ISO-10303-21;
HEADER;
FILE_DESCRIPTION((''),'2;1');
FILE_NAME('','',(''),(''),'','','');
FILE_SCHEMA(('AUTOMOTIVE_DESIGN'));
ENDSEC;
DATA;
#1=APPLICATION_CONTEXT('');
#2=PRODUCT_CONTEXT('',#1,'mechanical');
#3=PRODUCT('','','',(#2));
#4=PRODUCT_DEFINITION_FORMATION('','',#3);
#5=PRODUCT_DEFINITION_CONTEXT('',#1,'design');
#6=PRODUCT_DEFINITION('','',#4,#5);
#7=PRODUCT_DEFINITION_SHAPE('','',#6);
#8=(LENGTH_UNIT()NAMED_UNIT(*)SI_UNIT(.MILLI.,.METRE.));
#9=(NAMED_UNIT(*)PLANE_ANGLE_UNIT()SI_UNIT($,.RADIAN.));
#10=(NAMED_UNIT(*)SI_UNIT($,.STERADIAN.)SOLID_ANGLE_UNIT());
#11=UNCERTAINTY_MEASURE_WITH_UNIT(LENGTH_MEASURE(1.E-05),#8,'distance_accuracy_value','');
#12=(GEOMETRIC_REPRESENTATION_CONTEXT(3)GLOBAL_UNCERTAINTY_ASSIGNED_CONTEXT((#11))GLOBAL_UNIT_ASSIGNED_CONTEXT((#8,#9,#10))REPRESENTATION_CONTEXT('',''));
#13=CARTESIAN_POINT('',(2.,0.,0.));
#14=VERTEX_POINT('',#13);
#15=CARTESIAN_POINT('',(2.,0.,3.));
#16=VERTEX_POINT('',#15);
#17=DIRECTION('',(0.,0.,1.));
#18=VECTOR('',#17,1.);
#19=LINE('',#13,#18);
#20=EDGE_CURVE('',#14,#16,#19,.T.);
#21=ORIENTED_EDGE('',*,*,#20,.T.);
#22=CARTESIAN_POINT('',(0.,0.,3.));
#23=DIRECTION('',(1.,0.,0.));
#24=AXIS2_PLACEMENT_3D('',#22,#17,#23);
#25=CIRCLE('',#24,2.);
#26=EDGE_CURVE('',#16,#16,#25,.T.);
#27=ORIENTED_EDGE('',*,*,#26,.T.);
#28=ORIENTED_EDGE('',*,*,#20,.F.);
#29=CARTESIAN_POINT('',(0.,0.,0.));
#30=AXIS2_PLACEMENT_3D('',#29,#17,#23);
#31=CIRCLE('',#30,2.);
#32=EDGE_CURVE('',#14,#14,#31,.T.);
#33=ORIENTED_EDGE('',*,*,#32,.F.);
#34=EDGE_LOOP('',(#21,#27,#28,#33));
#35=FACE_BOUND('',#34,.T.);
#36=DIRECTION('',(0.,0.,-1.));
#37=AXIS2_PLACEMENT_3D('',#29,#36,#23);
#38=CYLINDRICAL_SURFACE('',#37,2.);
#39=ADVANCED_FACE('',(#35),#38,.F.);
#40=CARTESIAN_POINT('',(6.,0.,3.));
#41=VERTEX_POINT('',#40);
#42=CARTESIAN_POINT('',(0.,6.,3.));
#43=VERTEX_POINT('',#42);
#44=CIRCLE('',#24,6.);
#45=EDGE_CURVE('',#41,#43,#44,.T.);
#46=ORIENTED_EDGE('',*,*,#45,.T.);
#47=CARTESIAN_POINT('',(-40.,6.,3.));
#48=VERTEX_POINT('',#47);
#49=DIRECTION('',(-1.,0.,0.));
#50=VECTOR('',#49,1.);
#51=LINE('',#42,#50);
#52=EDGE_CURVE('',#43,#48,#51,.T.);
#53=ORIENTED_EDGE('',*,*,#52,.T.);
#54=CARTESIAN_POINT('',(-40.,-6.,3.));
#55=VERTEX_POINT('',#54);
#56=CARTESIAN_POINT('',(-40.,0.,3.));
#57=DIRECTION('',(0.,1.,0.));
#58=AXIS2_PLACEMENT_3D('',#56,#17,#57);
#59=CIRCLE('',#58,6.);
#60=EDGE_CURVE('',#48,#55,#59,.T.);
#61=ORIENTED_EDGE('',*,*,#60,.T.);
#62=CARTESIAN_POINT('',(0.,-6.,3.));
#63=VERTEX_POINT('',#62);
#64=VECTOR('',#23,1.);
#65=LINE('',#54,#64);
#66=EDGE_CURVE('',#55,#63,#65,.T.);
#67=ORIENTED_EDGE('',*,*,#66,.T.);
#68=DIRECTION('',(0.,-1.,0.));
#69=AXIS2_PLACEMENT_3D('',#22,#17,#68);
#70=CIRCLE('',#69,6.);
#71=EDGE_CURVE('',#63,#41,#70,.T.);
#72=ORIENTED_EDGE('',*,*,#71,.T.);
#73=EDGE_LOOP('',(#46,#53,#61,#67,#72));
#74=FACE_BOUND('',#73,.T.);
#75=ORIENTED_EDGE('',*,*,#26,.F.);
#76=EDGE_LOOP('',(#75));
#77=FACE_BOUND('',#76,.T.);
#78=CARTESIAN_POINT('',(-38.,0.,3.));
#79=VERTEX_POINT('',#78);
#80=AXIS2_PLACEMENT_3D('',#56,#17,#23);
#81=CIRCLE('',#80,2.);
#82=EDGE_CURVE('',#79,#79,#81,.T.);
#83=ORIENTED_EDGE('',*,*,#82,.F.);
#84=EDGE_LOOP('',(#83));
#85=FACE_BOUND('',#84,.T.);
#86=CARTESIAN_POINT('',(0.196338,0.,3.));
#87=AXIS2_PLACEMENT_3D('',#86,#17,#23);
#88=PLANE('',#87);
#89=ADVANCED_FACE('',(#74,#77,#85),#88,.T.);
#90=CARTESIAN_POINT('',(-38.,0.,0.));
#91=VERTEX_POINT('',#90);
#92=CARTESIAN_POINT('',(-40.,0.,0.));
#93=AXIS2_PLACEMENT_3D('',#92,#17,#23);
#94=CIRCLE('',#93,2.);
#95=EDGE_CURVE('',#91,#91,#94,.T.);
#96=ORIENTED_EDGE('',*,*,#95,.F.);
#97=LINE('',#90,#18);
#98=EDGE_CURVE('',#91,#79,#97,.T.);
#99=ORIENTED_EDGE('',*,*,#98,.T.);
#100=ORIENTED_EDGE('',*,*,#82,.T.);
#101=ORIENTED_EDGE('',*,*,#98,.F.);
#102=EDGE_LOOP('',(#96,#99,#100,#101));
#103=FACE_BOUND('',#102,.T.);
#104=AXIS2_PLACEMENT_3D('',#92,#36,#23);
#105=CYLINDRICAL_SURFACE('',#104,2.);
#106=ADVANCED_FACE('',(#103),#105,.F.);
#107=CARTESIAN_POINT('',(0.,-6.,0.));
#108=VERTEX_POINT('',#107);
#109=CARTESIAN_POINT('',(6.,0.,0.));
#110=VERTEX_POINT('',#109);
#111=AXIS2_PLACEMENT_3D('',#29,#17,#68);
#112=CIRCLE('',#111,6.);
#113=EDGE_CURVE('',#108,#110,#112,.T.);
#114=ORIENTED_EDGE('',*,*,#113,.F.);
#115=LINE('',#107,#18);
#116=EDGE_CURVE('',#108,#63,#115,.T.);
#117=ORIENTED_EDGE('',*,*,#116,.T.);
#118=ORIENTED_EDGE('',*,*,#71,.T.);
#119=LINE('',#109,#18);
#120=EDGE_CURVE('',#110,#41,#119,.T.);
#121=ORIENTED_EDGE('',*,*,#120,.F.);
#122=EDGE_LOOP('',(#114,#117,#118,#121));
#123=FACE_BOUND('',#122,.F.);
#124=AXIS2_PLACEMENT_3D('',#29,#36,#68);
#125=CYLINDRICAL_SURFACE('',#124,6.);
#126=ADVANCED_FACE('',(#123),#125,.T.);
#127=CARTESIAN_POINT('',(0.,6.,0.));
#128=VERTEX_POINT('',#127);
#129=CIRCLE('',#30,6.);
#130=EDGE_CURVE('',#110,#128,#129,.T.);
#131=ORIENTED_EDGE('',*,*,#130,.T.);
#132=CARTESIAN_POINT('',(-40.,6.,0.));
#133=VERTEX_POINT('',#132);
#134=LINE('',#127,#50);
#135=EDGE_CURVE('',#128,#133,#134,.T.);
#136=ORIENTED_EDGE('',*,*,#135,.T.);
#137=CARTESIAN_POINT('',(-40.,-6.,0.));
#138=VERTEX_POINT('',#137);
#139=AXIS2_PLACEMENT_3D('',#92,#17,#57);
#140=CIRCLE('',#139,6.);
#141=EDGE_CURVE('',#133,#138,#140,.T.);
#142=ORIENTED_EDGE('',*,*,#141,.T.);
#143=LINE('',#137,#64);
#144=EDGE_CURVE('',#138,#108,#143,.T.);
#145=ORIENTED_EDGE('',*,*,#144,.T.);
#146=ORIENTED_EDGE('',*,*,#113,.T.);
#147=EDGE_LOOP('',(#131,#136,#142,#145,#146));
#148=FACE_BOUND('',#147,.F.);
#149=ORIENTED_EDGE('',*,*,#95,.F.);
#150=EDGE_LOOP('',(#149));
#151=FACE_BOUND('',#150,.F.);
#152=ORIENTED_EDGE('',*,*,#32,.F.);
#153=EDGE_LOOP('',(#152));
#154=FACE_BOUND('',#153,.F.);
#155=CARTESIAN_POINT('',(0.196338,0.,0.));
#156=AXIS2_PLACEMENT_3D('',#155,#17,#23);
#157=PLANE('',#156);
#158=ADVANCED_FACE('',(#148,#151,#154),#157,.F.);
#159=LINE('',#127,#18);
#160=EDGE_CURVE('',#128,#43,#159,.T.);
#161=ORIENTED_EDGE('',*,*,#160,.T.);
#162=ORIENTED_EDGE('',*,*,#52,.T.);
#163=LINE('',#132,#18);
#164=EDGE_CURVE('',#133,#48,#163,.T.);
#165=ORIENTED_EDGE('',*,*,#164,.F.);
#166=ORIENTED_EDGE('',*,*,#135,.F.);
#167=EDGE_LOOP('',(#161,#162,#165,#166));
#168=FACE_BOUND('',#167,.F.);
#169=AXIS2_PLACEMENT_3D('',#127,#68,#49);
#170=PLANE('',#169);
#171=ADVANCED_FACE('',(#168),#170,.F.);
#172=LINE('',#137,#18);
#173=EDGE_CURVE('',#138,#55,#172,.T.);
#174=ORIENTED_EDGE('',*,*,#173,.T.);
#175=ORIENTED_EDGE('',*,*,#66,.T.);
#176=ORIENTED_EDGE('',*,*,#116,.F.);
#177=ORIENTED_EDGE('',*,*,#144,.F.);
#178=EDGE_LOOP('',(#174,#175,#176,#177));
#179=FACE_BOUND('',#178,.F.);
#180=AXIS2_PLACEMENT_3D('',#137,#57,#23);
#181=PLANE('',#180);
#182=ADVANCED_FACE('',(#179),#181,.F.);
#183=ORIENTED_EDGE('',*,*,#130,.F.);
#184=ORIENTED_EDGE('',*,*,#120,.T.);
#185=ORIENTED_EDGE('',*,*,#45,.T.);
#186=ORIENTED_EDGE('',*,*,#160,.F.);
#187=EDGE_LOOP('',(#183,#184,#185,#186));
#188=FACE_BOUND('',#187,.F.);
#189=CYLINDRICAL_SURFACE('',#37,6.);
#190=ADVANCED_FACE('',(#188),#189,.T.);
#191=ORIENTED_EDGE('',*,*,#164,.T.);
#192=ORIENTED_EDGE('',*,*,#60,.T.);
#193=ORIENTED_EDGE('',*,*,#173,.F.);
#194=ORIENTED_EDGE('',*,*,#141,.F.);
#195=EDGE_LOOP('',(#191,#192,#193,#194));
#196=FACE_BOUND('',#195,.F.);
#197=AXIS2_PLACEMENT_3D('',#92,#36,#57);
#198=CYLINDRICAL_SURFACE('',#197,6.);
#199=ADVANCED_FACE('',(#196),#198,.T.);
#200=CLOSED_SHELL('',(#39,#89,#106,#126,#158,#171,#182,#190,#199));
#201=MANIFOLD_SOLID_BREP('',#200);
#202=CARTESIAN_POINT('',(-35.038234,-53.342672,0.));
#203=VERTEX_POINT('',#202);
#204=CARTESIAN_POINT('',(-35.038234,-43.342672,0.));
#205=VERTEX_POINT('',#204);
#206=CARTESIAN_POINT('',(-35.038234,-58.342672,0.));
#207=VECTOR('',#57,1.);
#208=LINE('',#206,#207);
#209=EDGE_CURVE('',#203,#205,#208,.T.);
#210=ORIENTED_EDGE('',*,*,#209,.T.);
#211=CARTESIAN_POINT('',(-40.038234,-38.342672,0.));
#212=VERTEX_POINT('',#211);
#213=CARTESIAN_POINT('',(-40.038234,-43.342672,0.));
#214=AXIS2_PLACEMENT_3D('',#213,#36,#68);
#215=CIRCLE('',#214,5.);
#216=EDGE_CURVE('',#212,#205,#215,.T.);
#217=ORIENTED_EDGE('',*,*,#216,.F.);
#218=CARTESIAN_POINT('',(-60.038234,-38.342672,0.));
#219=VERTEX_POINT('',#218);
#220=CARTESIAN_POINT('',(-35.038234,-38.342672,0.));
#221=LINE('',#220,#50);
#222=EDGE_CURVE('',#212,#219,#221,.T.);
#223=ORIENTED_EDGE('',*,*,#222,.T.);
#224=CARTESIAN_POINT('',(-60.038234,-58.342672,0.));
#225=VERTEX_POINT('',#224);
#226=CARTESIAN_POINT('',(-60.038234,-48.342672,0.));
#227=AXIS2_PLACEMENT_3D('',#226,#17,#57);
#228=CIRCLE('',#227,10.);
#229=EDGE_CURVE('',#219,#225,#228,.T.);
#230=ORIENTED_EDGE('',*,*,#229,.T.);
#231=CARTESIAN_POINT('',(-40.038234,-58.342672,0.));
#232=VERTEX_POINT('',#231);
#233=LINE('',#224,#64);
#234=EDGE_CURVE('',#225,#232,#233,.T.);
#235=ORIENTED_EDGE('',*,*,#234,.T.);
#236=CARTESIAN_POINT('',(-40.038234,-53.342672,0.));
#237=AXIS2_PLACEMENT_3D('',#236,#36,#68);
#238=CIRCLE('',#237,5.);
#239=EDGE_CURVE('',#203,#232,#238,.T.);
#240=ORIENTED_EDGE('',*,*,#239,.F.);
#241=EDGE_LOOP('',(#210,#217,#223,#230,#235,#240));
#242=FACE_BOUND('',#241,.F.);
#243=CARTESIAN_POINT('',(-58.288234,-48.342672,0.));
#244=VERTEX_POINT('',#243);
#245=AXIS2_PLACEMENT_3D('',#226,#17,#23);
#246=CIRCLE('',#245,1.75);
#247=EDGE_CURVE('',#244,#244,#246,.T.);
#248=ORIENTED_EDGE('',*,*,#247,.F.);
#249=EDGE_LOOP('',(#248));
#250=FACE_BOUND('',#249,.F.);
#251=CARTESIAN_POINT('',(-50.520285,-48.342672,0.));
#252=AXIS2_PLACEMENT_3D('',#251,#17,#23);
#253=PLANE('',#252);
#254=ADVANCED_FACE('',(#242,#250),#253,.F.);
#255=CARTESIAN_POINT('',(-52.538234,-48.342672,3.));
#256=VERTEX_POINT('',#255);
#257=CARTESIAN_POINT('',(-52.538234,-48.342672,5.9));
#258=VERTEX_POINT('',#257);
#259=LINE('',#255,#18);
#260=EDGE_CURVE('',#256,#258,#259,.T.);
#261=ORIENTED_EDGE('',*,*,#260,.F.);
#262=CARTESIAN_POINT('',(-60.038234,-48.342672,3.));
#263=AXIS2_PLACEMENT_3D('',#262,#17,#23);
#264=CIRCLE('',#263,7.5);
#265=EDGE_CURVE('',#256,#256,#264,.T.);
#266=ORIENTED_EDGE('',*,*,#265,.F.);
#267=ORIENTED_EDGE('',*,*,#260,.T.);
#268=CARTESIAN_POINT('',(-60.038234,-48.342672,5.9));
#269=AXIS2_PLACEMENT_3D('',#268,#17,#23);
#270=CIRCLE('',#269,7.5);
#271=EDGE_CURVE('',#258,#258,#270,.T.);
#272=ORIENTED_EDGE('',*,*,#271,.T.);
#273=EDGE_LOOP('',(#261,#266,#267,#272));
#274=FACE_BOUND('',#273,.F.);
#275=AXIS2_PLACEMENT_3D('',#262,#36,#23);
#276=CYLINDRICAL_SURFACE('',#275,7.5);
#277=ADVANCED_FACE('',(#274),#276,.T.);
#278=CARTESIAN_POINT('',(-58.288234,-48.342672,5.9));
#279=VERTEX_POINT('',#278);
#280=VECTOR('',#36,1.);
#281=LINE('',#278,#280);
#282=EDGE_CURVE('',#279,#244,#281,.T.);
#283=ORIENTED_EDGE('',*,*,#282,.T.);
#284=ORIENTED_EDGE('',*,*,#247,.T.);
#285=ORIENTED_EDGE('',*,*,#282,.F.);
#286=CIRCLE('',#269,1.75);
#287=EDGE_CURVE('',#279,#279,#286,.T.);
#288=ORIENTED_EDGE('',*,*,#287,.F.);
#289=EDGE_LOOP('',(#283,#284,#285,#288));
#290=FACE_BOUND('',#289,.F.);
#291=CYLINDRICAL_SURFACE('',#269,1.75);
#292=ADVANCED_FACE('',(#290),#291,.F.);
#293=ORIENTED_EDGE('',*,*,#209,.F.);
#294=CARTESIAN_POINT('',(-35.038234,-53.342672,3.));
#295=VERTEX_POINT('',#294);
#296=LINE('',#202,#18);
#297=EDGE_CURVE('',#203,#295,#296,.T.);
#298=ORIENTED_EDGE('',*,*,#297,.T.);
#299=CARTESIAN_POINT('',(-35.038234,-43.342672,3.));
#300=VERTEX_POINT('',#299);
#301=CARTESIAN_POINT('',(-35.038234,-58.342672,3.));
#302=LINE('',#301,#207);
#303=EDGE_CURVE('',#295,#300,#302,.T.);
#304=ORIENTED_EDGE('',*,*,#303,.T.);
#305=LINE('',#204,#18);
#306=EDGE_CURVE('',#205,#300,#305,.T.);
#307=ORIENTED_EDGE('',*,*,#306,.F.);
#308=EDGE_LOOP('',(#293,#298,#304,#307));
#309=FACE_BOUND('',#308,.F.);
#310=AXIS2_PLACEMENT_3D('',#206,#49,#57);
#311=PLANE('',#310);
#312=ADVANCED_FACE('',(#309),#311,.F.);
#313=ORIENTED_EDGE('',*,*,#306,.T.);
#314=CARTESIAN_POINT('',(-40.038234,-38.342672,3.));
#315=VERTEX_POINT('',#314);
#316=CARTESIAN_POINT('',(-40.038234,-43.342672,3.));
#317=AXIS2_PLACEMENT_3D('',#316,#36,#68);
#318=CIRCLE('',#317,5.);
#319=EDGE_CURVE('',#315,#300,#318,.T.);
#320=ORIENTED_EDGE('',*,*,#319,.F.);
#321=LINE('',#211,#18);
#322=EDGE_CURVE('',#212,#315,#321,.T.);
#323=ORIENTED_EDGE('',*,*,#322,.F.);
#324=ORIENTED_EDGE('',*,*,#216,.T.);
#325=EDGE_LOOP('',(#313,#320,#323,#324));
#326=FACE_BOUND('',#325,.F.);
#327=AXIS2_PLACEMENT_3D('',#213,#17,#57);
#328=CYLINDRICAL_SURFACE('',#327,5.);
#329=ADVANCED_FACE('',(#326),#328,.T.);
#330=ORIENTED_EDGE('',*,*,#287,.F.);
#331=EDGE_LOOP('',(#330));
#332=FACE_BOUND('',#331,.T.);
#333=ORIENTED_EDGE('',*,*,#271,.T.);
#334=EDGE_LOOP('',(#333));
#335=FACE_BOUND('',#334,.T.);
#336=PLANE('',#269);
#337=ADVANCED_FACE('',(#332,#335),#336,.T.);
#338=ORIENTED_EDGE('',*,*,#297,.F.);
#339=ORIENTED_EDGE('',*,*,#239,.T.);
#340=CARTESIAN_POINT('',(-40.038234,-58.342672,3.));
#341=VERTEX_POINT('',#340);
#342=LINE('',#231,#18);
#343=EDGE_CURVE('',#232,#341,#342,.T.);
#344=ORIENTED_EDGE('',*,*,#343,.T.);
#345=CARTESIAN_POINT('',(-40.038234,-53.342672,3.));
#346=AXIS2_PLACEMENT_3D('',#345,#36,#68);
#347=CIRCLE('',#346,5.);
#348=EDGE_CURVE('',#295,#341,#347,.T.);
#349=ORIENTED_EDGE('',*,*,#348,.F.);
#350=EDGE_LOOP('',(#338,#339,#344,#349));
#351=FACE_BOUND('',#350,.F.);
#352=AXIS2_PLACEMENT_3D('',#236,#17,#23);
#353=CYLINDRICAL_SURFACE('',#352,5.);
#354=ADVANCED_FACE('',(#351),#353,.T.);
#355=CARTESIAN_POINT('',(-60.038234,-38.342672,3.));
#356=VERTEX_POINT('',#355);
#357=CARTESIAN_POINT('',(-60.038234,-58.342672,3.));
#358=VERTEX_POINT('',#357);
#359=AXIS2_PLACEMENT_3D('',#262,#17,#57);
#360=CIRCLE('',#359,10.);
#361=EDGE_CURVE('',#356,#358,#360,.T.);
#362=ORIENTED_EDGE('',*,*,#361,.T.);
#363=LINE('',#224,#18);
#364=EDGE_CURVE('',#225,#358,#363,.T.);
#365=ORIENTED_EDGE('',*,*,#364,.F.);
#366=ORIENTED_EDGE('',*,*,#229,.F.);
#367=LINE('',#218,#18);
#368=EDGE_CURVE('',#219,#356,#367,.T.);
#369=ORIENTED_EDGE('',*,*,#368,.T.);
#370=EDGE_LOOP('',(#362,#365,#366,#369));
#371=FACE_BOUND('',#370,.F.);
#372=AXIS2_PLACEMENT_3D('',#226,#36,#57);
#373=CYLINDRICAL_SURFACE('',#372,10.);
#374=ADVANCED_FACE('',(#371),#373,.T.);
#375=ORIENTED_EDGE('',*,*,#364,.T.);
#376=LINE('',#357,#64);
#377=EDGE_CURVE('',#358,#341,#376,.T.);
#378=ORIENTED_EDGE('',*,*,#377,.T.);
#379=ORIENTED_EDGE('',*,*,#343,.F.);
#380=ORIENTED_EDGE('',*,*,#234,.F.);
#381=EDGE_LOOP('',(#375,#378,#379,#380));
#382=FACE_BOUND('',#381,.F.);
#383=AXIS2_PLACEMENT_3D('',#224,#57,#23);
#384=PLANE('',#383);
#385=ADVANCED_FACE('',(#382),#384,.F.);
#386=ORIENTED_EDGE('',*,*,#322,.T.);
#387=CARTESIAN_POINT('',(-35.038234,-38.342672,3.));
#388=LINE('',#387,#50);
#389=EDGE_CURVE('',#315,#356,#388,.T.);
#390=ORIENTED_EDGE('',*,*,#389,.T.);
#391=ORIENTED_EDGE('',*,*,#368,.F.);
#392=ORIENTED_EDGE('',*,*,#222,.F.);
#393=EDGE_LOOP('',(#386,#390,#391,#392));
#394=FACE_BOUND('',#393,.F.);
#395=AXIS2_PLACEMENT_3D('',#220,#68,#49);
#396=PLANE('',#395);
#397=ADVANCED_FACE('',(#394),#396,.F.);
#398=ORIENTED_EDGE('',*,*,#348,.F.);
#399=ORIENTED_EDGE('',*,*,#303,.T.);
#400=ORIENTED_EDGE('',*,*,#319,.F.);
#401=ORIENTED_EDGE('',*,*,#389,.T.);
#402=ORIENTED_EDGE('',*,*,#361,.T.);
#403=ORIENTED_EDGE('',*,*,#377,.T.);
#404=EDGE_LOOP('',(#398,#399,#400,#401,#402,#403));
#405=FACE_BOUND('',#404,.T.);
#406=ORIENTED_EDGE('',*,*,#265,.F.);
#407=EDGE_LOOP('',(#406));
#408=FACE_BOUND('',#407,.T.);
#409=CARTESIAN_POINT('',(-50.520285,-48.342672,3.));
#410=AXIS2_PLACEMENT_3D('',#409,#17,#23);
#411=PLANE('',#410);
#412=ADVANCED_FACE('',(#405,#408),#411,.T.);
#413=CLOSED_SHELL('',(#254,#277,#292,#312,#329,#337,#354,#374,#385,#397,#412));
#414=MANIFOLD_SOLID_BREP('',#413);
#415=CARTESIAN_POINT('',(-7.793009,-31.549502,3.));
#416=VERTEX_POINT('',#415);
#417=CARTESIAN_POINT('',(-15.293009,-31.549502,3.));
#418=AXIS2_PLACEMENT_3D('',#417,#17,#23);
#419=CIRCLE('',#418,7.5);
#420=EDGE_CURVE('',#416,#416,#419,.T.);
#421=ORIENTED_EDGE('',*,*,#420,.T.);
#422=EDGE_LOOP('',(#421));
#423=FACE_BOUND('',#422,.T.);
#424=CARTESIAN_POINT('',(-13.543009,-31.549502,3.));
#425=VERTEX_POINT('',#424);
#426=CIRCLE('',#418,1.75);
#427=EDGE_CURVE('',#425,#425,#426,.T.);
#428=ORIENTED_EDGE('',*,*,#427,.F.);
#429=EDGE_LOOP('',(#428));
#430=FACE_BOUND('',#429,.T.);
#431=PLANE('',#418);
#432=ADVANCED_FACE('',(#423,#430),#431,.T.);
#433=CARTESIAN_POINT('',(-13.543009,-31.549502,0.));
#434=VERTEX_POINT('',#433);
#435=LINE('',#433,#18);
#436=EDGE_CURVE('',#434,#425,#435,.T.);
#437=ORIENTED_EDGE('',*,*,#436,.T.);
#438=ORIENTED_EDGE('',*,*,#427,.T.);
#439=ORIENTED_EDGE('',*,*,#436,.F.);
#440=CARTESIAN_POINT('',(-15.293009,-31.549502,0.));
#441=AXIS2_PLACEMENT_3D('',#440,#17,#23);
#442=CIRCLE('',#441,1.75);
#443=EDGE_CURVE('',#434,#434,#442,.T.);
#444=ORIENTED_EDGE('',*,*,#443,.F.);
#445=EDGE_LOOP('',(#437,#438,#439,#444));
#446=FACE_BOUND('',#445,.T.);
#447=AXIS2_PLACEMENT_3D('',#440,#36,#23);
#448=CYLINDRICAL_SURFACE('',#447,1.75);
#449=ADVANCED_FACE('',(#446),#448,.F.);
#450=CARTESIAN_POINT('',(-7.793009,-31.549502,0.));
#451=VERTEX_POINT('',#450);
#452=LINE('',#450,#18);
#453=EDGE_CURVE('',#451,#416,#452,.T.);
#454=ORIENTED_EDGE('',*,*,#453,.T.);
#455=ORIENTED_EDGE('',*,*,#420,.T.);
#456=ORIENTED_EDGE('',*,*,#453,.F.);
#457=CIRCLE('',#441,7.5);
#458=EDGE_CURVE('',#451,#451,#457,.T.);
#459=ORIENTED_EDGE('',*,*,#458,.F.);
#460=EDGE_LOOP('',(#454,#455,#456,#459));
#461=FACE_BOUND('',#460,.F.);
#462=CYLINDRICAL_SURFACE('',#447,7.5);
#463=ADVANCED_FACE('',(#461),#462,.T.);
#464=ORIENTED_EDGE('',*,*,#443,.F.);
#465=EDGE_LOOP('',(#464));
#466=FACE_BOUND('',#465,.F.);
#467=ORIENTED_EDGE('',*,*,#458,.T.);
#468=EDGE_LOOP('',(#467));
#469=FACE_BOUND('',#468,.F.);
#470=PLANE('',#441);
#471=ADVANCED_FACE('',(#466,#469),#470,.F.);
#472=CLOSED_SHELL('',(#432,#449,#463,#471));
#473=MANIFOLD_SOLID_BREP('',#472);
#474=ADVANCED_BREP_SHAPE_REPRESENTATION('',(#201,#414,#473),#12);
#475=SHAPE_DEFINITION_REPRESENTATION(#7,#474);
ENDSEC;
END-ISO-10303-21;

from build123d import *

# Parameters (mm, degrees)
F0_R     = 2
F1_DEPTH = 3
F3_DEPTH = 3
F4_R     = 7.5
F5_DEPTH = 2.9
F6_R     = 1.75
F7_DEPTH = 5.9
F8_R     = 7.5
F8_R_2   = 1.75
F9_DEPTH = 3
F10_R    = 5


with BuildPart() as f1:
    # F0 (on Top) → F1 (new body)
    with BuildSketch(Plane.XY):
        with BuildLine():
            ThreePointArc((0, -6), (4.2426406871, -4.2426406871), (6, 0))
            ThreePointArc((6, 0), (4.2426406871, 4.2426406871), (0, 6))
            ThreePointArc((0, 6), (-6, 0), (0, -6))
        make_face()
        Circle(F0_R, mode=Mode.SUBTRACT)
        with BuildLine():
            ThreePointArc((0, -6), (-6, 0), (0, 6))
            Line((0, 6), (-40, 6))
            ThreePointArc((-40, 6), (-35.7573593129, 4.2426406871), (-34, 0))
            ThreePointArc((-34, 0), (-35.7573593129, -4.2426406871), (-40, -6))
            Line((-40, -6), (0, -6))
        make_face()
        with BuildLine():
            ThreePointArc((-34, 0), (-35.7573593129, 4.2426406871), (-40, 6))
            ThreePointArc((-40, 6), (-46, 0), (-40, -6))
            ThreePointArc((-40, -6), (-35.7573593129, -4.2426406871), (-34, 0))
        make_face()
        with Locations((-40, 0)):
            Circle(F0_R, mode=Mode.SUBTRACT)
    extrude(amount=F1_DEPTH)


with BuildPart() as f3:
    # F2 (on Top) → F3 (new body)
    with BuildSketch(Plane.XY):
        with BuildLine():
            Line((-35.0382344763, -38.3426717669), (-60.0382344763, -38.3426717669))
            ThreePointArc((-60.0382344763, -38.3426717669), (-70.0382344763, -48.3426717669), (-60.0382344763, -58.3426717669))
            Line((-60.0382344763, -58.3426717669), (-35.0382344763, -58.3426717669))
            Line((-35.0382344763, -58.3426717669), (-35.0382344763, -38.3426717669))
        make_face()
    extrude(amount=F3_DEPTH)

    # F4 (on face) → F5 (join)
    with BuildSketch(Plane.XY.offset(3)):
        with Locations((-60.0382344763, -48.3426717669)):
            Circle(F4_R)
    extrude(amount=F5_DEPTH)

    # F6 (on face) → F7 (cut, through all)
    with BuildSketch(Plane.XY.offset(5.9)):
        with Locations((-60.0382344763, -48.3426717669)):
            Circle(F6_R)
    extrude(amount=-F7_DEPTH, mode=Mode.SUBTRACT)

    # F10
    f10_edges = [f3.edges().sort_by_distance(p)[0] for p in [
        (-35.038234, -38.342672, 1.5),
        (-35.038234, -58.342672, 1.5),
    ]]
    fillet(f10_edges, radius=F10_R)


with BuildPart() as f9:
    # F8 (on Top) → F9 (new body)
    with BuildSketch(Plane.XY):
        with Locations((-15.2930086479, -31.5495021641)):
            Circle(F8_R)
        with Locations((-15.2930086479, -31.5495021641)):
            Circle(F8_R_2, mode=Mode.SUBTRACT)
    extrude(amount=F9_DEPTH)


solid = Compound([f1.part, f3.part, f9.part])
